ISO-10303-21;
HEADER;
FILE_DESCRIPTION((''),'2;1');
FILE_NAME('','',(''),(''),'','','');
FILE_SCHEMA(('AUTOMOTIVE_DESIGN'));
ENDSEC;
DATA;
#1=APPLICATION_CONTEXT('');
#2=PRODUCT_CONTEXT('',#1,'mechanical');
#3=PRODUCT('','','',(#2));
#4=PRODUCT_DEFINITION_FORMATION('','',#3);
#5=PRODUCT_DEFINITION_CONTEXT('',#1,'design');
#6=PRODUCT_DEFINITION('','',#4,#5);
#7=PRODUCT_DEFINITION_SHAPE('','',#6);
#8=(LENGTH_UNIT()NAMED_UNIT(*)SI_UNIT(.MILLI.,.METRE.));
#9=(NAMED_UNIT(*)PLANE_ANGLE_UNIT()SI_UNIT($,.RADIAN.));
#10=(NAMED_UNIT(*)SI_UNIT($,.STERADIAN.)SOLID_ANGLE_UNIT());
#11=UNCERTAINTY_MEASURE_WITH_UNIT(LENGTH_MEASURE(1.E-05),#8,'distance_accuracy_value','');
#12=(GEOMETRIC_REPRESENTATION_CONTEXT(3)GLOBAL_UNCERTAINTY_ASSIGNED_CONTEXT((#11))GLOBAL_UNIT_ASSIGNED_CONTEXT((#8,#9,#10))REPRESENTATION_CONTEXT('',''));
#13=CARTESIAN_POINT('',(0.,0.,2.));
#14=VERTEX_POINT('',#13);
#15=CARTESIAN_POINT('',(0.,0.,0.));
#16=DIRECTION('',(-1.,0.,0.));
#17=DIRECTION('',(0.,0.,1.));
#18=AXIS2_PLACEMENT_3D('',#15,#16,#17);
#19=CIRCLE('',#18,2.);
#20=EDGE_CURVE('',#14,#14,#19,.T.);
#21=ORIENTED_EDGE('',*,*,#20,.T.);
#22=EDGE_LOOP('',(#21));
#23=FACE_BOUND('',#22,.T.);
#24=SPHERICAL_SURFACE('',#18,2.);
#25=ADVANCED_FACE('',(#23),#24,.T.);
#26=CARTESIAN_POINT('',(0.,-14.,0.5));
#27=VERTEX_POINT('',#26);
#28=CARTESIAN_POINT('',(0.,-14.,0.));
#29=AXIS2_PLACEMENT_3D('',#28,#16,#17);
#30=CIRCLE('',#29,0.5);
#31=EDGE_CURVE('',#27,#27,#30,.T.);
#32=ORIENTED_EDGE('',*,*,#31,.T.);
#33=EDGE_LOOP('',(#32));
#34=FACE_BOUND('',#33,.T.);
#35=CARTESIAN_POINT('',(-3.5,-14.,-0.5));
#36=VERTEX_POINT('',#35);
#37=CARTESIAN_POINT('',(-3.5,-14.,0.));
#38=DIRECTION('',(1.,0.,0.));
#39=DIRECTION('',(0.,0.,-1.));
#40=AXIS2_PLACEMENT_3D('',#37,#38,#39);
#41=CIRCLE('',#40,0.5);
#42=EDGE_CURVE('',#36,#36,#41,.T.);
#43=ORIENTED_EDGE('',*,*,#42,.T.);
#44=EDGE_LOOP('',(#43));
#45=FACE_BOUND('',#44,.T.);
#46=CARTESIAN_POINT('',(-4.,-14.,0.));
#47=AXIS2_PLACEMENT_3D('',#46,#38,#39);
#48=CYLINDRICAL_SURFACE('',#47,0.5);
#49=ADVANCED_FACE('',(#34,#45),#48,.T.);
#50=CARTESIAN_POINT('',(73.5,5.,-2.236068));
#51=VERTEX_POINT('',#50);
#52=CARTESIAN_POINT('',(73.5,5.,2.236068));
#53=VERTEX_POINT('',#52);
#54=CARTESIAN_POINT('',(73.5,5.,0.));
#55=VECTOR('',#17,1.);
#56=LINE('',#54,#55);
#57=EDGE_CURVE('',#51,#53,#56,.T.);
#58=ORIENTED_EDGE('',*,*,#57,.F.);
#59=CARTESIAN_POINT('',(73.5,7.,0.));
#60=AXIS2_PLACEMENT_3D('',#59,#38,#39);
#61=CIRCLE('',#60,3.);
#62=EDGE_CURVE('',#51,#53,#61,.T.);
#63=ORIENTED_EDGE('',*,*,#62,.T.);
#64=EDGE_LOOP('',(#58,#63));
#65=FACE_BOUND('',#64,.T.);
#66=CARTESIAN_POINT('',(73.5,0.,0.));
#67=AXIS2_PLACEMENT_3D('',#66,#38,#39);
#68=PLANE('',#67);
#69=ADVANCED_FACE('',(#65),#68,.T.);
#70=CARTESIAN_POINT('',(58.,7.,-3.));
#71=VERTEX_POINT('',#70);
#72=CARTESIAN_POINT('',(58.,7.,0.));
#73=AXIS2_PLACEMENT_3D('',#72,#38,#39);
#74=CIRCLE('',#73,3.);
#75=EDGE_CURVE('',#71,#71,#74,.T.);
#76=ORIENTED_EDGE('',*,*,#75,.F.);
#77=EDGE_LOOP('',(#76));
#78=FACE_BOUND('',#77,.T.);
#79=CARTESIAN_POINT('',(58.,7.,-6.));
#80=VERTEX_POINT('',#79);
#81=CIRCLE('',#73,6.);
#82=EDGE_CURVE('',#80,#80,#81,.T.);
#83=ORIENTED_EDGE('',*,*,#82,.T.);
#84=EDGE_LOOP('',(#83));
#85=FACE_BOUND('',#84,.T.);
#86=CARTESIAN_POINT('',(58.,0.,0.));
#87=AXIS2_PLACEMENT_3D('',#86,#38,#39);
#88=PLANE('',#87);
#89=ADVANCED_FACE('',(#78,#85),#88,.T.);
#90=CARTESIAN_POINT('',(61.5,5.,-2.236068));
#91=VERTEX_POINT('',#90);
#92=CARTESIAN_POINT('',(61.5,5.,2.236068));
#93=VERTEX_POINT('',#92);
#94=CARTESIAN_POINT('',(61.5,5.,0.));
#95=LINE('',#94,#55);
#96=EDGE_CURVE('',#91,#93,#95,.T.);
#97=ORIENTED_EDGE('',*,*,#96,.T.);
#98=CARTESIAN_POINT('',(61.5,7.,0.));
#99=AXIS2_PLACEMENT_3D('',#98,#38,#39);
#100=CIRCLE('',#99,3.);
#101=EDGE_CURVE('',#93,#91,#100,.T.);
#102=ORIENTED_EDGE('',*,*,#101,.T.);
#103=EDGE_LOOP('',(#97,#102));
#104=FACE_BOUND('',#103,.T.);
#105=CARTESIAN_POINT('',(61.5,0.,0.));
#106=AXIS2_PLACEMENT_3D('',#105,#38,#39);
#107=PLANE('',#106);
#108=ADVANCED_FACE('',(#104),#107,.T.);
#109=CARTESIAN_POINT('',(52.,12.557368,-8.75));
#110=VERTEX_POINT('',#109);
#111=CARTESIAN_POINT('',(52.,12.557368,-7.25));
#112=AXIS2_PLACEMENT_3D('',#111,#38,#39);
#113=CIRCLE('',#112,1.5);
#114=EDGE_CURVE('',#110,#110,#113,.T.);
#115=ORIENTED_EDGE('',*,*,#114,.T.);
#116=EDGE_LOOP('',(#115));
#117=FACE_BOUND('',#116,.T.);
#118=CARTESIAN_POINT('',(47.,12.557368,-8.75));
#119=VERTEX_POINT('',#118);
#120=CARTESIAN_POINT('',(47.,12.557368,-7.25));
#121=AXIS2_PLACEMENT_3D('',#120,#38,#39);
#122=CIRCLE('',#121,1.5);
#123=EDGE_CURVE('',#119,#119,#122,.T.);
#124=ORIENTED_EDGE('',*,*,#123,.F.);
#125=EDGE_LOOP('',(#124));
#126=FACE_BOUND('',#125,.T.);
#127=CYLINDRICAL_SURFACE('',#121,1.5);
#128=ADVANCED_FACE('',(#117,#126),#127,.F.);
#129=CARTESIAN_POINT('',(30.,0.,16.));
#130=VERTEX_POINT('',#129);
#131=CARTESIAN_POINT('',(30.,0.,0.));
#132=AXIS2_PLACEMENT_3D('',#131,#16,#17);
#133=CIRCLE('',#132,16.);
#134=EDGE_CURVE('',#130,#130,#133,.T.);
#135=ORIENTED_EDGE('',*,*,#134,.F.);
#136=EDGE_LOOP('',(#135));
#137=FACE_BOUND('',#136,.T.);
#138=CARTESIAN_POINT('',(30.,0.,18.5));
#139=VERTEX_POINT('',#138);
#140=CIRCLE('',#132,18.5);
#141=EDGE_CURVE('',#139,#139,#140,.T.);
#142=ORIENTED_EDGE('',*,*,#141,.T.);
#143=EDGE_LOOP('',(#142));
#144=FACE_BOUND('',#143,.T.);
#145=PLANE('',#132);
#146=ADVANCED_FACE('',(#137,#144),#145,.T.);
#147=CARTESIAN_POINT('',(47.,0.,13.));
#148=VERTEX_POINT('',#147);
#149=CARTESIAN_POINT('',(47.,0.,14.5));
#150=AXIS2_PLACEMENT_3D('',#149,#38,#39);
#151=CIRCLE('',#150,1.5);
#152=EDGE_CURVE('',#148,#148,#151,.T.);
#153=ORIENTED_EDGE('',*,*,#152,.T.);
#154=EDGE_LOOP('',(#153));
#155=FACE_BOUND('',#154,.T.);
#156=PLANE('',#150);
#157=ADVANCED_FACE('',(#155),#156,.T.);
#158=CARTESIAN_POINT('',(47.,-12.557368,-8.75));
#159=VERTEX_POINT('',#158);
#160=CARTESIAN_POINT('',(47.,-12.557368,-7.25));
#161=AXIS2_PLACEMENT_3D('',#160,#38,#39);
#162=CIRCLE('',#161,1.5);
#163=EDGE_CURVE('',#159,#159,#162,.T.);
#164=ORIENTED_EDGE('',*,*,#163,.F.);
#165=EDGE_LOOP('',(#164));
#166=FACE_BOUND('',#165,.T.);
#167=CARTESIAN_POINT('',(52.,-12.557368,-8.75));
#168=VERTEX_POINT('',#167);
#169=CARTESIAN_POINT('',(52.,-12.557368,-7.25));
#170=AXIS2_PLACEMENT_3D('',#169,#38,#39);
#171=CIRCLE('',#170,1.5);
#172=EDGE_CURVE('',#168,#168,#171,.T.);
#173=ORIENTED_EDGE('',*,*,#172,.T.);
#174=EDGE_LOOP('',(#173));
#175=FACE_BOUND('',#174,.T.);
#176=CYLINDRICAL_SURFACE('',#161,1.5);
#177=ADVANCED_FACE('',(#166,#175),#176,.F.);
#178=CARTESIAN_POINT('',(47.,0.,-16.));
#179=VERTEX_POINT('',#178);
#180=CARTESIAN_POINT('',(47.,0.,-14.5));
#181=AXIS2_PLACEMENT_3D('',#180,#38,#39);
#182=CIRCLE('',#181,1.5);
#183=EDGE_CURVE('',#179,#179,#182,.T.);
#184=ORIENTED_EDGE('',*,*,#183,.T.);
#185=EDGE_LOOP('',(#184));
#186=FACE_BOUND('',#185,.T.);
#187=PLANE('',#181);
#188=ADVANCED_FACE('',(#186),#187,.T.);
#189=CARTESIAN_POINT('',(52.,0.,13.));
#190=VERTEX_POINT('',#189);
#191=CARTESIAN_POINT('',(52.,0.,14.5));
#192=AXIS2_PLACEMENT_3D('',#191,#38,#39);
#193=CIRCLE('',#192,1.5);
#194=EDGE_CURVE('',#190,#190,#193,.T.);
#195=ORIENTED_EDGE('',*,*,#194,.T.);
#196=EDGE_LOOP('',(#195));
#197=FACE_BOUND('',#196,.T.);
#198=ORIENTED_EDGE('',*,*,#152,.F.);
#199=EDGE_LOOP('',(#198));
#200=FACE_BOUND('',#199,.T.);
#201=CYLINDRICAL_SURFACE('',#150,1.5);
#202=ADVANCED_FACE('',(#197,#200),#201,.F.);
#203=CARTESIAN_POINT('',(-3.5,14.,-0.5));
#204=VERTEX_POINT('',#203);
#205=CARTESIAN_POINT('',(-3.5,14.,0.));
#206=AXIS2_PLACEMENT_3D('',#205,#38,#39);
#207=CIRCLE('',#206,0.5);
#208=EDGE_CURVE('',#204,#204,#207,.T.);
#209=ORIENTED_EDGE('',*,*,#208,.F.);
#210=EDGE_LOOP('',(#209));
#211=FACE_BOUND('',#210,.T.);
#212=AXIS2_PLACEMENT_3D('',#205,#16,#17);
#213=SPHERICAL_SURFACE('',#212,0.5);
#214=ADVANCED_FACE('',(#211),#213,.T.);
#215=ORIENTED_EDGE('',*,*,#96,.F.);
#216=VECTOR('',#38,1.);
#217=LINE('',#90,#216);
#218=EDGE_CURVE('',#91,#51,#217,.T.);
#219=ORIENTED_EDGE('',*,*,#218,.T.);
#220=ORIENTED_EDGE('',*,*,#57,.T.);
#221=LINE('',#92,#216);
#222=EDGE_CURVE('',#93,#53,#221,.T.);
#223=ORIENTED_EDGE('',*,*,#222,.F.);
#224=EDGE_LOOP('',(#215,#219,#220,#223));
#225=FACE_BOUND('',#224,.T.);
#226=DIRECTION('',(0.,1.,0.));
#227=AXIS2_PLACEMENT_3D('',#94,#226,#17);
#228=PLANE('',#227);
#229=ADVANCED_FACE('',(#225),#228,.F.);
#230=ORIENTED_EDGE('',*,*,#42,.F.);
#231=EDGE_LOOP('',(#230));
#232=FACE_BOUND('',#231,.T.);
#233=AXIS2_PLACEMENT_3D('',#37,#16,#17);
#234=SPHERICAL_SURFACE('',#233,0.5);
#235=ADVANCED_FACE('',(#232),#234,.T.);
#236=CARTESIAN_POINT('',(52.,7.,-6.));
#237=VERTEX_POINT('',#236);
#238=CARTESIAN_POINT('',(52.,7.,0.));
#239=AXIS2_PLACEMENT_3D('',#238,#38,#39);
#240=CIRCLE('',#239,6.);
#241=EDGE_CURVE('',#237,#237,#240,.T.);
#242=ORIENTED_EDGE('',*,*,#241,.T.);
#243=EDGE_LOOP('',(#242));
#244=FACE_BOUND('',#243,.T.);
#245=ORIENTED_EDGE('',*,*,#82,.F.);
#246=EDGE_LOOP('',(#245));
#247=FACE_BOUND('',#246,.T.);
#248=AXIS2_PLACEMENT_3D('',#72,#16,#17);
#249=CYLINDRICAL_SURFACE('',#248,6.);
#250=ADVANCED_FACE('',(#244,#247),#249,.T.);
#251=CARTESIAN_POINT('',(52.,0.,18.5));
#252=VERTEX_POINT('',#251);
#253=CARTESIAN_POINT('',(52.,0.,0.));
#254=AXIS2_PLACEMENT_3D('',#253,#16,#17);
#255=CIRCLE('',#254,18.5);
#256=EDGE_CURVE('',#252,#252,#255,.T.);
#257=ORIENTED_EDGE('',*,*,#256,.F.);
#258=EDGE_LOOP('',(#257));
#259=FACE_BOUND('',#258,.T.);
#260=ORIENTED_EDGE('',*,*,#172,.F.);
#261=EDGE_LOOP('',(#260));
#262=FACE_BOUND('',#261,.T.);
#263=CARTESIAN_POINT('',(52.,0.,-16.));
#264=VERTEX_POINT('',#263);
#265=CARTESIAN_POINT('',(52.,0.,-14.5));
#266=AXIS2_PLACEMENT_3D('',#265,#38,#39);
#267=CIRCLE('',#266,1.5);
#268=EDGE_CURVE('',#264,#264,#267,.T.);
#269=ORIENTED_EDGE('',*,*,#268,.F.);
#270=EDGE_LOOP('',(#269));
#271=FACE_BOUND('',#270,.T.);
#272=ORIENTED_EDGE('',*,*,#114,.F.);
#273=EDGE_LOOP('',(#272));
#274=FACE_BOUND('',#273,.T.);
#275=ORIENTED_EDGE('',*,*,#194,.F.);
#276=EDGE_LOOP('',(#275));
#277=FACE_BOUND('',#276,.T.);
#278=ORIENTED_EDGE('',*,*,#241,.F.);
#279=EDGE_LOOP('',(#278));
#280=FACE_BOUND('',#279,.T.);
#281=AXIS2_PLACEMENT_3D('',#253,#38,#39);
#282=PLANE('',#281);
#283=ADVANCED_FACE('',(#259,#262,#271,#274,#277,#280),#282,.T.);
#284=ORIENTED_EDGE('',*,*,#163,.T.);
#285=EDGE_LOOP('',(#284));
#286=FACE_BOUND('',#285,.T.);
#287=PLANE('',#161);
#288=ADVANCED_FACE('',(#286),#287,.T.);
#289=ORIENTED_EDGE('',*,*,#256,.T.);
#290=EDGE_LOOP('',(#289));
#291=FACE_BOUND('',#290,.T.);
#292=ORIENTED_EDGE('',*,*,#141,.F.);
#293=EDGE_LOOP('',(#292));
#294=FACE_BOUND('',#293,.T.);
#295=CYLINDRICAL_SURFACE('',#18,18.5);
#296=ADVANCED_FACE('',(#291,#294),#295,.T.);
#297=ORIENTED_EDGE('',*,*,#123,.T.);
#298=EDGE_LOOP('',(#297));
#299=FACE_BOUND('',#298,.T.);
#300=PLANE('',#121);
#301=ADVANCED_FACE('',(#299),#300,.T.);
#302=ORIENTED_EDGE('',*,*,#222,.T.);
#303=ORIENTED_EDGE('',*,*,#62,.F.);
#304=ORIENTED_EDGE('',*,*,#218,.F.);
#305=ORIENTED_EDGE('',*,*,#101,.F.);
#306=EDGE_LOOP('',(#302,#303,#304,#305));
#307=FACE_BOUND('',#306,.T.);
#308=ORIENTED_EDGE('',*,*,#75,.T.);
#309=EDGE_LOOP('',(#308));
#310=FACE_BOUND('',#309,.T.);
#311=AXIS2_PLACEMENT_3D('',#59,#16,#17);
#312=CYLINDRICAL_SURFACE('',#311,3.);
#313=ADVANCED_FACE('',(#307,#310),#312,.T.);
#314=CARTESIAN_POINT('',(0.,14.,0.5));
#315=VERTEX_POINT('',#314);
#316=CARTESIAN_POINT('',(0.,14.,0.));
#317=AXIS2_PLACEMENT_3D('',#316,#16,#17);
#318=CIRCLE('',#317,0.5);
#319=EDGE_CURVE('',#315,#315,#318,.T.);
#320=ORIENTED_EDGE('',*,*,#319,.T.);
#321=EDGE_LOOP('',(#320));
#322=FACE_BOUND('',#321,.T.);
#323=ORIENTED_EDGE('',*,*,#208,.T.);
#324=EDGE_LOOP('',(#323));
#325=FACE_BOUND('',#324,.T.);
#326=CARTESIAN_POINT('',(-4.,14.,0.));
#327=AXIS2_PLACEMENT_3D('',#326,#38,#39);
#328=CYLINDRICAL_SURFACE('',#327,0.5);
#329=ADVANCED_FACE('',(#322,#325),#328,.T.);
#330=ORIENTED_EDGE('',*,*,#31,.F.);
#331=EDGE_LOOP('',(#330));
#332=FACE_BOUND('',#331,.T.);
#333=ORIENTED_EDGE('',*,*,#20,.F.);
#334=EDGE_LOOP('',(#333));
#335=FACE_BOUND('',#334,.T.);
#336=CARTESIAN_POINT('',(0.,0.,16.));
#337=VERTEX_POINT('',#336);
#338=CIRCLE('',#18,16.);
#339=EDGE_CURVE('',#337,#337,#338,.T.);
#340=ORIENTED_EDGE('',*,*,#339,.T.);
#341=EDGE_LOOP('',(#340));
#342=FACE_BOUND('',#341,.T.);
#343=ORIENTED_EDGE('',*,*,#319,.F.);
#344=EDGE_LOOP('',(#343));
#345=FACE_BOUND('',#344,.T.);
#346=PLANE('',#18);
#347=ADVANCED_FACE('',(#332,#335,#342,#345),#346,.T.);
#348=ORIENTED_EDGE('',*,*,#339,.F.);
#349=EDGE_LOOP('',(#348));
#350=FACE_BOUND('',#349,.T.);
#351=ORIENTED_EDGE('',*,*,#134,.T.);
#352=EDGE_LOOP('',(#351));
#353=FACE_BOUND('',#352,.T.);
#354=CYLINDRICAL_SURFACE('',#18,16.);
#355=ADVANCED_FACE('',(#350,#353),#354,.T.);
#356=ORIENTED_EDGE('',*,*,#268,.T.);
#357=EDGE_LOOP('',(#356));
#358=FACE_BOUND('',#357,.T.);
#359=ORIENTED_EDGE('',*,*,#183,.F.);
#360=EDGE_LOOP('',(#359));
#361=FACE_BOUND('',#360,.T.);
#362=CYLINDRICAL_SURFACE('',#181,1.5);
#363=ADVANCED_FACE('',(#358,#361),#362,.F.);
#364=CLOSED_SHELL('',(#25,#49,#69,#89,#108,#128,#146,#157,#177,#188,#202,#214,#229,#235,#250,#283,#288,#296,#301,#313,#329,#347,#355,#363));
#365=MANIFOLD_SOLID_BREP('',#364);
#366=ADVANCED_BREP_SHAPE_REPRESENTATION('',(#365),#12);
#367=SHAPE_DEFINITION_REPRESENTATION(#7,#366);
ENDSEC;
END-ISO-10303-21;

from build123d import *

# Parameters (mm, degrees)
SKETCH2_R           = 2
BOSS_EXTRUDE1_DEPTH = 2
FILLET3_R           = 2
SKETCH3_R           = 6
BOSS_EXTRUDE2_DEPTH = 6
SKETCH4_R           = 3
BOSS_EXTRUDE3_DEPTH = 15.5
CUT_EXTRUDE1_START  = -12
CUT_EXTRUDE1_DEPTH  = 12
SKETCH6_R           = 1.5
CUT_EXTRUDE2_DEPTH  = 5
SKETCH7_R           = 1.5
CUT_EXTRUDE3_DEPTH  = 5
SKETCH9_R           = 0.5
BOSS_EXTRUDE4_DEPTH = 4
FILLET4_R           = 0.5


with BuildPart() as part:
    # Sketch1 → Revolve1 (revolve)
    with BuildSketch(Plane(origin=(0, 0, 0), x_dir=(1, 0, 0), z_dir=(0, 1, 0)), mode=Mode.PRIVATE) as revolve1_sk:
        Polygon((52, 18.5), (52, 0), (0, 0), (0, 16), (30, 16), (30, 18.5), align=None)
    revolve(revolve1_sk.sketch.rotate(Axis((0, 0, 0), (1, 0, 0)), 180), axis=Axis((0, 0, 0), (1, 0, 0)))

    # Sketch2 → Boss-Extrude1 (add)
    with BuildSketch(Plane.ZY):
        Circle(SKETCH2_R)
    extrude(amount=BOSS_EXTRUDE1_DEPTH)

    # Fillet3
    fillet3_edges = [part.edges().sort_by_distance(p)[0] for p in [
        (-2, 0, -2),
    ]]
    fillet(fillet3_edges, radius=FILLET3_R - 0.0001)  # a hair under: the kernel refuses the full size

    # Sketch3 → Boss-Extrude2 (add)
    with BuildSketch(Plane(origin=(52, 0, 0), x_dir=(0, 0, -1), z_dir=(1, 0, 0))):
        with Locations((0, 7)):
            Circle(SKETCH3_R)
    extrude(amount=BOSS_EXTRUDE2_DEPTH)

    # Sketch4 → Boss-Extrude3 (add)
    with BuildSketch(Plane(origin=(58, 0, 0), x_dir=(0, 0, -1), z_dir=(1, 0, 0))):
        with Locations((0, 7)):
            Circle(SKETCH4_R)
    extrude(amount=BOSS_EXTRUDE3_DEPTH)

    # Sketch5 → Cut-Extrude1 (cut)
    with BuildSketch(Plane(origin=(73.5, 0, 0), x_dir=(0, 0, -1), z_dir=(1, 0, 0)).offset(CUT_EXTRUDE1_START)):
        with BuildLine():
            ThreePointArc((-2.236067977, 5), (-1.224744871, 4.261387212), (0, 4))
            Line((0, 4), (0, 5))
            Line((0, 5), (-2.236067977, 5))
        make_face()
        with BuildLine():
            Line((0, 5), (0, 4))
            ThreePointArc((0, 4), (1.224744871, 4.261387212), (2.236067977, 5))
            Line((2.236067977, 5), (0, 5))
        make_face()
    extrude(amount=CUT_EXTRUDE1_DEPTH, mode=Mode.SUBTRACT)

    # Sketch6 → Cut-Extrude2 (cut)
    with BuildSketch(Plane(origin=(52, 0, 0), x_dir=(0, 0, -1), z_dir=(1, 0, 0))):
        with Locations((-14.5, 0)):
            Circle(SKETCH6_R)
        with Locations((7.25, 12.557368355)):
            Circle(SKETCH6_R)
        with Locations((7.25, -12.557368355)):
            Circle(SKETCH6_R)
    extrude(amount=-CUT_EXTRUDE2_DEPTH, mode=Mode.SUBTRACT)

    # Sketch7 → Cut-Extrude3 (cut)
    with BuildSketch(Plane(origin=(52, 0, 0), x_dir=(0, 0, -1), z_dir=(1, 0, 0))):
        with Locations((14.5, 0)):
            Circle(SKETCH7_R)
    extrude(amount=-CUT_EXTRUDE3_DEPTH, mode=Mode.SUBTRACT)

    # Sketch9 → Boss-Extrude4 (add)
    with BuildSketch(Plane.ZY):
        with Locations((0, 14)):
            Circle(SKETCH9_R)
        with Locations((0, -14)):
            Circle(SKETCH9_R)
    extrude(amount=BOSS_EXTRUDE4_DEPTH)

    # Fillet4
    fillet4_edges = [part.edges().sort_by_distance(p)[0] for p in [
        (-4, 14, -0.5),
        (-4, -14, -0.5),
    ]]
    fillet(fillet4_edges, radius=FILLET4_R)


solid = part.part
